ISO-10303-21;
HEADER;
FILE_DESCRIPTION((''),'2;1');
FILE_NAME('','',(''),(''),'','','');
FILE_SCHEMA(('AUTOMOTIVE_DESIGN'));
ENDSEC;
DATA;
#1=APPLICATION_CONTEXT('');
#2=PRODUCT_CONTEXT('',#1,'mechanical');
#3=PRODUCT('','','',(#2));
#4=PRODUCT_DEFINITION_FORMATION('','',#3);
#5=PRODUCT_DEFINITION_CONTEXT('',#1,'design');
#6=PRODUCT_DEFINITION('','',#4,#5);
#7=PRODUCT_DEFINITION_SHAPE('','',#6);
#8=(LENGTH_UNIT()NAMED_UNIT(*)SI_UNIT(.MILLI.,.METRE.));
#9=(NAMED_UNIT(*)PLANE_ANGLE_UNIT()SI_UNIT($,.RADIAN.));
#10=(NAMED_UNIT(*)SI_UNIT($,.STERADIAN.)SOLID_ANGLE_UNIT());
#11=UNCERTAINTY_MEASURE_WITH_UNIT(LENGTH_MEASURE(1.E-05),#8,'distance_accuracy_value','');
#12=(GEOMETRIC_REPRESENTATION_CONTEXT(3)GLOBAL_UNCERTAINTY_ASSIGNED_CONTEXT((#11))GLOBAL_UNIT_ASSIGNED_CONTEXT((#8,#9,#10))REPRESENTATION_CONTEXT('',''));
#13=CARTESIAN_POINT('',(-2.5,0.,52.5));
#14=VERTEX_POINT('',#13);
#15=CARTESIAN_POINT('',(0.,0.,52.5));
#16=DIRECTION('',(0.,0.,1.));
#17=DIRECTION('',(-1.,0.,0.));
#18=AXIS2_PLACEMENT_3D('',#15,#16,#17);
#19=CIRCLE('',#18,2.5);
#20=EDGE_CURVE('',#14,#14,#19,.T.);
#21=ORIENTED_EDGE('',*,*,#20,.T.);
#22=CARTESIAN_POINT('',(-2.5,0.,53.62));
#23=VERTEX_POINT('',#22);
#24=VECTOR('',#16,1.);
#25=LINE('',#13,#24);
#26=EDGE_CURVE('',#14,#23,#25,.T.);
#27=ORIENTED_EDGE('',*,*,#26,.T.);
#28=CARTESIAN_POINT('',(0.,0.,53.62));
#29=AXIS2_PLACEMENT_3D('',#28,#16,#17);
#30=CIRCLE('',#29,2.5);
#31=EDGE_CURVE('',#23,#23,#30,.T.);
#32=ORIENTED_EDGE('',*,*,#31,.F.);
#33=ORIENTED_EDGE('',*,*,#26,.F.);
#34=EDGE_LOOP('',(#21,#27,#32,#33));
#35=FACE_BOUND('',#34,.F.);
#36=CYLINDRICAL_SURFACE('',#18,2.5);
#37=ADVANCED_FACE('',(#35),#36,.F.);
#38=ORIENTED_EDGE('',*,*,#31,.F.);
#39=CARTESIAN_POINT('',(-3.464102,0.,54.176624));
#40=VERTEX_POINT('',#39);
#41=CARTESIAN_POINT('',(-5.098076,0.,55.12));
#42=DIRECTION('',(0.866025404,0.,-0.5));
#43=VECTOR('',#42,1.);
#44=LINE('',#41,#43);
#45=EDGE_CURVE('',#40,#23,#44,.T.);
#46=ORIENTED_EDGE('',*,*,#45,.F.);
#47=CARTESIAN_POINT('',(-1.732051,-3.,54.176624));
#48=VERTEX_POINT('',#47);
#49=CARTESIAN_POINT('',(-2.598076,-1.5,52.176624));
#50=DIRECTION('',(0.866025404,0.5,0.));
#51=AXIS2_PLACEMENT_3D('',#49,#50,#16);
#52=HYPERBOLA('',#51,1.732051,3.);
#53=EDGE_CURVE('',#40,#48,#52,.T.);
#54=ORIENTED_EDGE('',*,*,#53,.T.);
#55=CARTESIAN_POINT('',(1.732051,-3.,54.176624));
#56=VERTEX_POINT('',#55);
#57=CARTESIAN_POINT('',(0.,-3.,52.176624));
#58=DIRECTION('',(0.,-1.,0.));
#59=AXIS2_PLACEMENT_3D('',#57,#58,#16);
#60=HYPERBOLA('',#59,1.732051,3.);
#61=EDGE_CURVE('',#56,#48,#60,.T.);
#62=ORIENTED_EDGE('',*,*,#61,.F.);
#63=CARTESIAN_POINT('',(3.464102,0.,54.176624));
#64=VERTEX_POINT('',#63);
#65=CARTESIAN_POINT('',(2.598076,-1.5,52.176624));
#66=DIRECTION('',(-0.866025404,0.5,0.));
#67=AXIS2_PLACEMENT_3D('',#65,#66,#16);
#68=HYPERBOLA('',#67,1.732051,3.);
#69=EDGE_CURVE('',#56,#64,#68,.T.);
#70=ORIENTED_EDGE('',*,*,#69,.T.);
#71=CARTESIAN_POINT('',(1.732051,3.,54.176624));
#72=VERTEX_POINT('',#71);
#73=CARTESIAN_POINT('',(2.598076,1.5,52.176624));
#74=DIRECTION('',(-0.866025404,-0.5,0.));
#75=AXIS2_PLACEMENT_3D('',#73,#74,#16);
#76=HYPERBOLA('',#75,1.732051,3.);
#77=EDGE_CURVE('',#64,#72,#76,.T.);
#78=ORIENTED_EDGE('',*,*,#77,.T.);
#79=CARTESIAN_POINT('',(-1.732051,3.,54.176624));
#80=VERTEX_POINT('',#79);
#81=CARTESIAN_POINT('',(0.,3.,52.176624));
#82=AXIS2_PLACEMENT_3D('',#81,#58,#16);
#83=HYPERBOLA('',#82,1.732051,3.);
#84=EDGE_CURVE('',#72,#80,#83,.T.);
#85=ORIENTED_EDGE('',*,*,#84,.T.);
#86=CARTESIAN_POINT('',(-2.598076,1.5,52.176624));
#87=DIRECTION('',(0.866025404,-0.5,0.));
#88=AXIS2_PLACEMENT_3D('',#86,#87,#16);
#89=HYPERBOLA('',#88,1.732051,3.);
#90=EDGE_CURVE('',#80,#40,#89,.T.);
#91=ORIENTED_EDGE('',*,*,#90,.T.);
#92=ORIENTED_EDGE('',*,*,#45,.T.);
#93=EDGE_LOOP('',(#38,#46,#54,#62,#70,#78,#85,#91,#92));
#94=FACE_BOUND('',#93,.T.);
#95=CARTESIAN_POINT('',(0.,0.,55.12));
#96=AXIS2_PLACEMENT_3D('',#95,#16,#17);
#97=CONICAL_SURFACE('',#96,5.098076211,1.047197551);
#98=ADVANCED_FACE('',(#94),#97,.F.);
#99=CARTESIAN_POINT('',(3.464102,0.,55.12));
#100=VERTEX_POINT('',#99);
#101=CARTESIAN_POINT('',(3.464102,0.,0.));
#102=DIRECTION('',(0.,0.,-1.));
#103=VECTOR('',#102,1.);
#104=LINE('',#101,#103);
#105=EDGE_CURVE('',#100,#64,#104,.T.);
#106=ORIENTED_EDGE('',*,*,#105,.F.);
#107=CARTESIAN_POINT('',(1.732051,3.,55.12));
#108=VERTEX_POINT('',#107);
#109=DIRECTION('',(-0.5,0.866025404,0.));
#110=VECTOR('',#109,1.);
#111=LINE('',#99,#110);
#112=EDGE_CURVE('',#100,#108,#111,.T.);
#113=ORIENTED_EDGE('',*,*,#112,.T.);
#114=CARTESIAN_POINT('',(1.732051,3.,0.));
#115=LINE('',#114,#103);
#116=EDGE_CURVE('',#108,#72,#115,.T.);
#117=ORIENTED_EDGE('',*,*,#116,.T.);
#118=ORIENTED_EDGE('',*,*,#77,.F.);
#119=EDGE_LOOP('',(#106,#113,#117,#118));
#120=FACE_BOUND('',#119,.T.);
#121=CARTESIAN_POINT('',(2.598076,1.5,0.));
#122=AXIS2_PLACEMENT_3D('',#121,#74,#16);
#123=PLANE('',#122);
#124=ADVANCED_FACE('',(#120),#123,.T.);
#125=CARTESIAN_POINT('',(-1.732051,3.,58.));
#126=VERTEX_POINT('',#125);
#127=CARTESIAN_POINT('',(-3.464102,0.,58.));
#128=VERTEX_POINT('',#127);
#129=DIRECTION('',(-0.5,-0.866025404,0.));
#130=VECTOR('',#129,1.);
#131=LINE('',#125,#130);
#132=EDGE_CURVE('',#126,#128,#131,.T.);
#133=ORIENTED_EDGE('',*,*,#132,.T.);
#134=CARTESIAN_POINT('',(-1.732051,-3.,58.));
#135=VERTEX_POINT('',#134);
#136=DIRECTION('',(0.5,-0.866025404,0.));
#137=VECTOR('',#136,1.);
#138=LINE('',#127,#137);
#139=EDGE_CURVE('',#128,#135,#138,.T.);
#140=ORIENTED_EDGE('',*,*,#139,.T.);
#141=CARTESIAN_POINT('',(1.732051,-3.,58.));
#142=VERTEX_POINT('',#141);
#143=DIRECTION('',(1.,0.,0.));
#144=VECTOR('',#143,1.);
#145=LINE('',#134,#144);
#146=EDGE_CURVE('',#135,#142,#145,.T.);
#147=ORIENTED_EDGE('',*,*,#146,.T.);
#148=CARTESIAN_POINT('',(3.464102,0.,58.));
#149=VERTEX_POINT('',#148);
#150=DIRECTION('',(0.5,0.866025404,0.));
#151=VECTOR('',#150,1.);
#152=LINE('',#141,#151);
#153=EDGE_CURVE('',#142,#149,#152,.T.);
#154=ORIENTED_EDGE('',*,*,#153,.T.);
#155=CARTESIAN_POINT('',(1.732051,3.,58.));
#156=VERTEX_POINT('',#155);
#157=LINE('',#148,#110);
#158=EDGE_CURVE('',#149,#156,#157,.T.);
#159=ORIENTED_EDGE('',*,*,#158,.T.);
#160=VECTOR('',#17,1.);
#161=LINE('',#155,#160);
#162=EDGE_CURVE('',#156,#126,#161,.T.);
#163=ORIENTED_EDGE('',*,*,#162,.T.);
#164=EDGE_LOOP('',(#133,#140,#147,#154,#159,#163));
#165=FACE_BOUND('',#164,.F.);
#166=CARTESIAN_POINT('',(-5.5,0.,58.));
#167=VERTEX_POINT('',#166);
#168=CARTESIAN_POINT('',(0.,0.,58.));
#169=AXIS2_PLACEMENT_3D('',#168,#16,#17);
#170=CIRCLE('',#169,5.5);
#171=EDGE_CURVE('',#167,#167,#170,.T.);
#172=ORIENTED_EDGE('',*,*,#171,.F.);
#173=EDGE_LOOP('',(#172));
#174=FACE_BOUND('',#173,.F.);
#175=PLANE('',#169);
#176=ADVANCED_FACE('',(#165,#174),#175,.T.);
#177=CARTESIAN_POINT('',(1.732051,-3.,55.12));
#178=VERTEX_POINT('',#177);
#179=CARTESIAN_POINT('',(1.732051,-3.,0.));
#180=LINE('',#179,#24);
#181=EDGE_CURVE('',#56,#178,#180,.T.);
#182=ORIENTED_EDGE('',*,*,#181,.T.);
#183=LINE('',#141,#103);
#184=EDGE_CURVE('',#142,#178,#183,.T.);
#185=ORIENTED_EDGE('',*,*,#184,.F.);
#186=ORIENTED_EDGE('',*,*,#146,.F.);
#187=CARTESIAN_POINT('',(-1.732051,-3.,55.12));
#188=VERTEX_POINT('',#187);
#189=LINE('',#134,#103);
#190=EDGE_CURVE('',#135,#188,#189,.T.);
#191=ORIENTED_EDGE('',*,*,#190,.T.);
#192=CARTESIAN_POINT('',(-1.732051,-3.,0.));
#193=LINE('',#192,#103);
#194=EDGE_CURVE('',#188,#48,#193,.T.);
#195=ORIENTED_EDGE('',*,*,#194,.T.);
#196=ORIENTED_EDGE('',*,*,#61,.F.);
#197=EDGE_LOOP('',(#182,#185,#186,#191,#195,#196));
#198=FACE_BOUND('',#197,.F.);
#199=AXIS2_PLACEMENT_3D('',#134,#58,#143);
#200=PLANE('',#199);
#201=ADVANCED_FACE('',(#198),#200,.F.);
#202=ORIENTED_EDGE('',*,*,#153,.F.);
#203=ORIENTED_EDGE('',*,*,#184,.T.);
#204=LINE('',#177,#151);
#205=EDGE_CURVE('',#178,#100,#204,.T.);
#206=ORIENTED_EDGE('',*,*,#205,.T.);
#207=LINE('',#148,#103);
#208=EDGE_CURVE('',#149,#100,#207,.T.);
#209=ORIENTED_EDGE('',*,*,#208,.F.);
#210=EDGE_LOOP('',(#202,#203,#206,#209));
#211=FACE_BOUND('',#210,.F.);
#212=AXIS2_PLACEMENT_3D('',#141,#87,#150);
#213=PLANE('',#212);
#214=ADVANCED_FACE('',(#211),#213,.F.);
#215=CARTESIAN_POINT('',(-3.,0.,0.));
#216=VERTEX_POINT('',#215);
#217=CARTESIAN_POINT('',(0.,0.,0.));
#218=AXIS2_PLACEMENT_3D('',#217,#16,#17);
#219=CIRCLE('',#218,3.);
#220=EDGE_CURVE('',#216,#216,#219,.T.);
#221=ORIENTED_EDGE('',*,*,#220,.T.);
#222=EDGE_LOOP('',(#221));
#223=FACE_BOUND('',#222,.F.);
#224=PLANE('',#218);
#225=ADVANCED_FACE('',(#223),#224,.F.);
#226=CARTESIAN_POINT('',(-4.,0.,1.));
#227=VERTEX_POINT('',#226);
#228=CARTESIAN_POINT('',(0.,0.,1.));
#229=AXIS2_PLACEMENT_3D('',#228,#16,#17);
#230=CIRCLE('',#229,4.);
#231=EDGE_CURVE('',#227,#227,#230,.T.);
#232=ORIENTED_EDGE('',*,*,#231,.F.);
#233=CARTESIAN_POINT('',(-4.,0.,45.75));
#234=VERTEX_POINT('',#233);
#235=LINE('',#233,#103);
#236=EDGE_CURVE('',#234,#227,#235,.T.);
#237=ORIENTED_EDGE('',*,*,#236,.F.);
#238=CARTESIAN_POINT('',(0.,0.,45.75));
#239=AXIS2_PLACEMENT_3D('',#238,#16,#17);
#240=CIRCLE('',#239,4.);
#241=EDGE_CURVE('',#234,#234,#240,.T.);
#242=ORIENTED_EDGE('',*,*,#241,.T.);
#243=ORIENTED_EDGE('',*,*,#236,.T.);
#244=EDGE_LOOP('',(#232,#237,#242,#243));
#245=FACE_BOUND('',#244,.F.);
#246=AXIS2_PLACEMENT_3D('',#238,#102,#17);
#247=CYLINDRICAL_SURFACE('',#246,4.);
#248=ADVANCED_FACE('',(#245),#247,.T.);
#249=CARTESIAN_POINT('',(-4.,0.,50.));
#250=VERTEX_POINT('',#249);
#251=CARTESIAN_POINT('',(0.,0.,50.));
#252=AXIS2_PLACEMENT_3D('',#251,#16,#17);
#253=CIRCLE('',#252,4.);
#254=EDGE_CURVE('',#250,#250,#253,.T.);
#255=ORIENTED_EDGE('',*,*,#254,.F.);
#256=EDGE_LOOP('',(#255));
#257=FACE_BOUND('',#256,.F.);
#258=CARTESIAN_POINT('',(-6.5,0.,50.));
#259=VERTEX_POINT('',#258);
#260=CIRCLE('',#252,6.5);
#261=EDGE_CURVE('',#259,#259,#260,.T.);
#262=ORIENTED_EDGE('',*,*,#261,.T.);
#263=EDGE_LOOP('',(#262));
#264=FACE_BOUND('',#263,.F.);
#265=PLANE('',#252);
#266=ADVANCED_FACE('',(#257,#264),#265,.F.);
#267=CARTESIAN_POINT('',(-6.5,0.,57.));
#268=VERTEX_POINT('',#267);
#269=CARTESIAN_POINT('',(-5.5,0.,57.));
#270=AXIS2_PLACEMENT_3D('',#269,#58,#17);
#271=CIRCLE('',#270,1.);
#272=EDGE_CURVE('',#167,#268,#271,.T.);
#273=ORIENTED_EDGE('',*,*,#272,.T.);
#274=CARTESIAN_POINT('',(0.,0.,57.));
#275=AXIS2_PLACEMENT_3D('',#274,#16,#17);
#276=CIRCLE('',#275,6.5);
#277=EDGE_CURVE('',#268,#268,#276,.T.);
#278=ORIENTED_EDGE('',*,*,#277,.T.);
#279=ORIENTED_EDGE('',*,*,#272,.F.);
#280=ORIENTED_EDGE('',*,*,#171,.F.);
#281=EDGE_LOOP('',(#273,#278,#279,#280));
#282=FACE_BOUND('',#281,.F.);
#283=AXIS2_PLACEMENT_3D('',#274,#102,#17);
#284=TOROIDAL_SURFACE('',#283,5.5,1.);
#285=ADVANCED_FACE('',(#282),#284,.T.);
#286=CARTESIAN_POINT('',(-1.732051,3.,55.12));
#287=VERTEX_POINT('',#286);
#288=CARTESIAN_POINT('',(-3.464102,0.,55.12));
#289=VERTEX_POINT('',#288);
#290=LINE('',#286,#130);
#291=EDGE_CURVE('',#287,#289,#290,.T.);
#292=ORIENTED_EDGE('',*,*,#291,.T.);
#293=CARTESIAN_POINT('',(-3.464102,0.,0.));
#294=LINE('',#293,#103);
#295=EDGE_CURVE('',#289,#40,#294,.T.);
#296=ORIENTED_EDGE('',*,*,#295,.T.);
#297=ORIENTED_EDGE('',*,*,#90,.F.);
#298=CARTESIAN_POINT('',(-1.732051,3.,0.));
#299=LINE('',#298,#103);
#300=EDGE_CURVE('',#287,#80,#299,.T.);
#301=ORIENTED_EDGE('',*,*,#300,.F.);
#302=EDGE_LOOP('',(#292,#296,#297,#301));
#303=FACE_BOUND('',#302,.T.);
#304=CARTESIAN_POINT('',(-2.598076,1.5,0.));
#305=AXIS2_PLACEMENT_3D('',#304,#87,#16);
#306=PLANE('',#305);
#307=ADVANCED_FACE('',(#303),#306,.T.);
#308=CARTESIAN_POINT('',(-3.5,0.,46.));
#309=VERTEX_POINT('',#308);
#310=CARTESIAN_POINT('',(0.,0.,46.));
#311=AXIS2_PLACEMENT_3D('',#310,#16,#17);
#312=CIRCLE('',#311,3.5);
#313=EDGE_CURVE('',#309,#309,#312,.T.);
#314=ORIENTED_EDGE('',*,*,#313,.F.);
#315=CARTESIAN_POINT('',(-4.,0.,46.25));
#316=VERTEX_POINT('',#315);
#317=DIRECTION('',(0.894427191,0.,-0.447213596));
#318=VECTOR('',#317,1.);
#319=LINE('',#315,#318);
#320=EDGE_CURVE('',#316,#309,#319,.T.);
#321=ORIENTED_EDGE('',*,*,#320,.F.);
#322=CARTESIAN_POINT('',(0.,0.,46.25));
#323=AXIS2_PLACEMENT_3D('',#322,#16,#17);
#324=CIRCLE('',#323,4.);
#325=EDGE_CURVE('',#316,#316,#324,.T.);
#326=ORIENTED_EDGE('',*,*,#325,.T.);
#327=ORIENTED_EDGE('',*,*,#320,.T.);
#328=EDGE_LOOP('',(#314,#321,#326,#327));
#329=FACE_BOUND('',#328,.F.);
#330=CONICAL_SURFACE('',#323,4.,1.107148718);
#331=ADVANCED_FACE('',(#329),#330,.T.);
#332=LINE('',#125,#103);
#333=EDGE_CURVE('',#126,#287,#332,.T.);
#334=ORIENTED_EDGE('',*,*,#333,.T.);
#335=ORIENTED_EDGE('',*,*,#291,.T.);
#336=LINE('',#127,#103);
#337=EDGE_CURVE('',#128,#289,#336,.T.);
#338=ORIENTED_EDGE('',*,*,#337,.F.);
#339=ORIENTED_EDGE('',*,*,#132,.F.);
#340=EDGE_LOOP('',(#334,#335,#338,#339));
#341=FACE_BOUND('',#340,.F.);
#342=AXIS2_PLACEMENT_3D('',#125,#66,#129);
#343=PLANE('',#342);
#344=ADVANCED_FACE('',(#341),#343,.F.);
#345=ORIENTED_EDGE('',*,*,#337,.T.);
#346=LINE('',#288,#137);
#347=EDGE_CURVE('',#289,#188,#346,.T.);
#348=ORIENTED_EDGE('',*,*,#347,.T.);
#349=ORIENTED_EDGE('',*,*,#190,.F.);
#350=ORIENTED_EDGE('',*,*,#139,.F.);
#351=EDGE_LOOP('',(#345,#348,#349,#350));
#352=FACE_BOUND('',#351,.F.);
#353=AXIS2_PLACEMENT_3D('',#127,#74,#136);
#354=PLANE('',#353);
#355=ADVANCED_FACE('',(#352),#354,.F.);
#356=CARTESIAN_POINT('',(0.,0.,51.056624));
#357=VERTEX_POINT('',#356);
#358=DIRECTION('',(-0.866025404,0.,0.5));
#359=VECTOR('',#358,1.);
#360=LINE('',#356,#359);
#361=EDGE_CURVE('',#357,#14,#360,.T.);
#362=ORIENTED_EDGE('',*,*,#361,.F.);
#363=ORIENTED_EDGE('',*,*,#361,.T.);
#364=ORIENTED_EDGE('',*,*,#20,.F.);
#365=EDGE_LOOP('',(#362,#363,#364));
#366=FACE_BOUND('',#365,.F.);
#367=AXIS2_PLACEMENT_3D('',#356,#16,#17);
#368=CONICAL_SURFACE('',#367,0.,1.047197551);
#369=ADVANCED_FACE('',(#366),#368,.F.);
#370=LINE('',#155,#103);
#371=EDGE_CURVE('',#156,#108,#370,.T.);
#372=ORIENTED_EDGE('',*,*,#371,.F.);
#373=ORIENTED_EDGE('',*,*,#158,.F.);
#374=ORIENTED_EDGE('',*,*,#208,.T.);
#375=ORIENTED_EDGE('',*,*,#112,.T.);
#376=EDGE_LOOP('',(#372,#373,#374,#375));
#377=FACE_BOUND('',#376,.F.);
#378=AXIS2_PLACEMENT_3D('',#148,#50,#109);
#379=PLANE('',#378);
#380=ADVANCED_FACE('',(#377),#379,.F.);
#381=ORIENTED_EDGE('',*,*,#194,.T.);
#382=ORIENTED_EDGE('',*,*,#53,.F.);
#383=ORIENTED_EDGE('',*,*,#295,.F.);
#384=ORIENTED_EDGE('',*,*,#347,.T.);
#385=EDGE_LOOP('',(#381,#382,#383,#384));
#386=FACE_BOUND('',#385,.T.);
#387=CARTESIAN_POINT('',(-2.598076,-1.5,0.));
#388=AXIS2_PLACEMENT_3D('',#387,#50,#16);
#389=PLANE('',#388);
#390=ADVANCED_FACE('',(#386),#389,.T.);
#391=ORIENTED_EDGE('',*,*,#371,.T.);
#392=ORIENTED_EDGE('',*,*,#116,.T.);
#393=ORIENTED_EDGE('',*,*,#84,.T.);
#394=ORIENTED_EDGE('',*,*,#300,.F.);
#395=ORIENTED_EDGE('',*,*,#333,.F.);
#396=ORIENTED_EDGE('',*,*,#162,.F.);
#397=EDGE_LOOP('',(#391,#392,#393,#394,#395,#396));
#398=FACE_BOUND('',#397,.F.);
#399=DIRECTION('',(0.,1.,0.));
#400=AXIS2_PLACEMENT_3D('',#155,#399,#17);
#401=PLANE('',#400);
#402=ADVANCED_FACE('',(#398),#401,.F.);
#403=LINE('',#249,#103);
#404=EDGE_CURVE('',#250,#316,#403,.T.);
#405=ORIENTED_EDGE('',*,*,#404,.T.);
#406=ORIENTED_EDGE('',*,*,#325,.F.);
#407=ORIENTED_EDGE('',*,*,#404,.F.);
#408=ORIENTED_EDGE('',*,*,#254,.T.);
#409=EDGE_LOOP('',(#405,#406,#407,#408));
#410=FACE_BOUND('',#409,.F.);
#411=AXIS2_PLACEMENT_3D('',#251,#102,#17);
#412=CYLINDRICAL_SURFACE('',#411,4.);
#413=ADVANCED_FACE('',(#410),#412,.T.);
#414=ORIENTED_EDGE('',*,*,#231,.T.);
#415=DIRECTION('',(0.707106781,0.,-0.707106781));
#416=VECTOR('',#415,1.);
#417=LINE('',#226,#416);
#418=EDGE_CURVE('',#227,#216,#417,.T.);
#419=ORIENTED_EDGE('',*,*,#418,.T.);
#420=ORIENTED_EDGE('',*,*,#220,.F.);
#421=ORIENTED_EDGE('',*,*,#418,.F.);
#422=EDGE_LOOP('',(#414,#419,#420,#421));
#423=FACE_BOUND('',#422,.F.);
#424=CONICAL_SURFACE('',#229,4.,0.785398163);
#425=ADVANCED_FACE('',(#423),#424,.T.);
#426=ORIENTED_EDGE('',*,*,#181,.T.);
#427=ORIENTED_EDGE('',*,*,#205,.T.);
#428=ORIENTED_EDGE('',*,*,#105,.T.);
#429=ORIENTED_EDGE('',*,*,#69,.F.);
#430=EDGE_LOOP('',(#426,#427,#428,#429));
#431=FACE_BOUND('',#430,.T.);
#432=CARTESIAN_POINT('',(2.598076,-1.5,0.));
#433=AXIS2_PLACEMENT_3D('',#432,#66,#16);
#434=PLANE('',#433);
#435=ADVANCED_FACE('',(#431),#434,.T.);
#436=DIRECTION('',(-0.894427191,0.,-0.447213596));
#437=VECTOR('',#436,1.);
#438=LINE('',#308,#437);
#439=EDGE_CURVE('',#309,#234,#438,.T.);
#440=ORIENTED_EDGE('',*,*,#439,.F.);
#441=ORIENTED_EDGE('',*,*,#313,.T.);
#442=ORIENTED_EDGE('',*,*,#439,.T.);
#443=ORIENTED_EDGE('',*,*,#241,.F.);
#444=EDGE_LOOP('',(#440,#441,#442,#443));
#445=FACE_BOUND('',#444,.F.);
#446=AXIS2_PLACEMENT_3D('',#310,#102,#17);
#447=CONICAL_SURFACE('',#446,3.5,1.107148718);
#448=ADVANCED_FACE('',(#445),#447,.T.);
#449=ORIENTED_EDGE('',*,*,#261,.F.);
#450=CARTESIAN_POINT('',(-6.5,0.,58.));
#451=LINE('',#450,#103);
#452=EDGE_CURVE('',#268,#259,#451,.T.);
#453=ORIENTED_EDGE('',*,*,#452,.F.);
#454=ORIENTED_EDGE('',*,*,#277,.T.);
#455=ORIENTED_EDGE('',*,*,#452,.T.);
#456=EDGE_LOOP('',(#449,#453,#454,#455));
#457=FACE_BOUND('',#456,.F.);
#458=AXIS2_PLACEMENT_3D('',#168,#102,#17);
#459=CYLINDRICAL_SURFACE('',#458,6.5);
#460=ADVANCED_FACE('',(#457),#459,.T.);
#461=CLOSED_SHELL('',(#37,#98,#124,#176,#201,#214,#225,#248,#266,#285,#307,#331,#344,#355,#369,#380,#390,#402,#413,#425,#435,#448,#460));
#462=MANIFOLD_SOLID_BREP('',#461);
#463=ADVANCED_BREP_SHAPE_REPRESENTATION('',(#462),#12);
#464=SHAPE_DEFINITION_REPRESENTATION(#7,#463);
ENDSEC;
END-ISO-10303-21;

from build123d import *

# Parameters (mm, degrees)
F2_R     = 1
F3_SIZE  = 1
F5_DEPTH = 2.88


# Not quite as in the source:
# - a fillet or chamfer that OpenCascade refuses, or shapes differently, is made with other operations: its cross-section is extruded or revolved along the edge and cut away or added


with BuildPart() as f1:
    # F0 (on Front) → F1 (revolve)
    with BuildSketch(Plane.XZ):
        Polygon((-4, 0), (0, 0), (0, 51.056624327), (-2.5, 52.5), (-2.5, 58), (-6.5, 58), (-6.5, 50), (-4, 50), (-4, 46.25), (-3.5, 46), (-4, 45.75), align=None)
    revolve(axis=Axis((0, 0, 18.332445994), (0, 0, 1)))

    # F2
    f2_edges = [f1.edges().sort_by_distance(p)[0] for p in [
        (6.5, 0, 58),
    ]]
    fillet(f2_edges, radius=F2_R)

    # F3
    f3_edges = [f1.edges().sort_by_distance(p)[0] for p in [
        (4, 0, 0),
    ]]
    chamfer(f3_edges, length=F3_SIZE)

    # F4 (on face) → F5 (cut)
    with BuildSketch(Plane.XY.offset(58)):
        Polygon((-1.7320508076, -3), (1.7320508076, -3), (3.4641016151, 0), (1.7320508076, 3), (-1.7320508076, 3), (-3.4641016151, 0), align=None)
    extrude(amount=-F5_DEPTH, mode=Mode.SUBTRACT)

    # F6: chamfer of 1.5 x 2.5980762114 on 1 edges, made by hand


with BuildPart() as f6_tool2:
    # F6_s3 → F6_t4 (revolve)
    with BuildSketch(Plane.XZ):
        Polygon((-5.0980762114, 55.12), (-2.5, 53.62), (-2.5, 55.12), align=None)
    revolve(axis=Axis((0, 0, 55.12), (0, 0, 1)))

    split(bisect_by=Plane(origin=(-2.5980762114, -1.5, 0), x_dir=(0, 0, 1), z_dir=(0.8660254038, 0.5, 0)), keep=Keep.TOP)

    split(bisect_by=Plane(origin=(-2.5980762114, 1.5, 0), x_dir=(0, 0, 1), z_dir=(0.8660254038, -0.5, 0)), keep=Keep.TOP)

    split(bisect_by=Plane.XZ.offset(-3), keep=Keep.TOP)

    split(bisect_by=Plane(origin=(2.5980762114, 1.5, 0), x_dir=(0, 0, 1), z_dir=(-0.8660254038, -0.5, 0)), keep=Keep.TOP)

    split(bisect_by=Plane(origin=(2.5980762114, -1.5, 0), x_dir=(0, 0, 1), z_dir=(-0.8660254038, 0.5, 0)), keep=Keep.TOP)

    split(bisect_by=Plane.XZ.offset(3), keep=Keep.BOTTOM)


with BuildPart() as f1_1:
    add(f1.part)

    # F6_t1: cut F6_tool2
    add(f6_tool2.part, mode=Mode.SUBTRACT)


solid = f1_1.part
